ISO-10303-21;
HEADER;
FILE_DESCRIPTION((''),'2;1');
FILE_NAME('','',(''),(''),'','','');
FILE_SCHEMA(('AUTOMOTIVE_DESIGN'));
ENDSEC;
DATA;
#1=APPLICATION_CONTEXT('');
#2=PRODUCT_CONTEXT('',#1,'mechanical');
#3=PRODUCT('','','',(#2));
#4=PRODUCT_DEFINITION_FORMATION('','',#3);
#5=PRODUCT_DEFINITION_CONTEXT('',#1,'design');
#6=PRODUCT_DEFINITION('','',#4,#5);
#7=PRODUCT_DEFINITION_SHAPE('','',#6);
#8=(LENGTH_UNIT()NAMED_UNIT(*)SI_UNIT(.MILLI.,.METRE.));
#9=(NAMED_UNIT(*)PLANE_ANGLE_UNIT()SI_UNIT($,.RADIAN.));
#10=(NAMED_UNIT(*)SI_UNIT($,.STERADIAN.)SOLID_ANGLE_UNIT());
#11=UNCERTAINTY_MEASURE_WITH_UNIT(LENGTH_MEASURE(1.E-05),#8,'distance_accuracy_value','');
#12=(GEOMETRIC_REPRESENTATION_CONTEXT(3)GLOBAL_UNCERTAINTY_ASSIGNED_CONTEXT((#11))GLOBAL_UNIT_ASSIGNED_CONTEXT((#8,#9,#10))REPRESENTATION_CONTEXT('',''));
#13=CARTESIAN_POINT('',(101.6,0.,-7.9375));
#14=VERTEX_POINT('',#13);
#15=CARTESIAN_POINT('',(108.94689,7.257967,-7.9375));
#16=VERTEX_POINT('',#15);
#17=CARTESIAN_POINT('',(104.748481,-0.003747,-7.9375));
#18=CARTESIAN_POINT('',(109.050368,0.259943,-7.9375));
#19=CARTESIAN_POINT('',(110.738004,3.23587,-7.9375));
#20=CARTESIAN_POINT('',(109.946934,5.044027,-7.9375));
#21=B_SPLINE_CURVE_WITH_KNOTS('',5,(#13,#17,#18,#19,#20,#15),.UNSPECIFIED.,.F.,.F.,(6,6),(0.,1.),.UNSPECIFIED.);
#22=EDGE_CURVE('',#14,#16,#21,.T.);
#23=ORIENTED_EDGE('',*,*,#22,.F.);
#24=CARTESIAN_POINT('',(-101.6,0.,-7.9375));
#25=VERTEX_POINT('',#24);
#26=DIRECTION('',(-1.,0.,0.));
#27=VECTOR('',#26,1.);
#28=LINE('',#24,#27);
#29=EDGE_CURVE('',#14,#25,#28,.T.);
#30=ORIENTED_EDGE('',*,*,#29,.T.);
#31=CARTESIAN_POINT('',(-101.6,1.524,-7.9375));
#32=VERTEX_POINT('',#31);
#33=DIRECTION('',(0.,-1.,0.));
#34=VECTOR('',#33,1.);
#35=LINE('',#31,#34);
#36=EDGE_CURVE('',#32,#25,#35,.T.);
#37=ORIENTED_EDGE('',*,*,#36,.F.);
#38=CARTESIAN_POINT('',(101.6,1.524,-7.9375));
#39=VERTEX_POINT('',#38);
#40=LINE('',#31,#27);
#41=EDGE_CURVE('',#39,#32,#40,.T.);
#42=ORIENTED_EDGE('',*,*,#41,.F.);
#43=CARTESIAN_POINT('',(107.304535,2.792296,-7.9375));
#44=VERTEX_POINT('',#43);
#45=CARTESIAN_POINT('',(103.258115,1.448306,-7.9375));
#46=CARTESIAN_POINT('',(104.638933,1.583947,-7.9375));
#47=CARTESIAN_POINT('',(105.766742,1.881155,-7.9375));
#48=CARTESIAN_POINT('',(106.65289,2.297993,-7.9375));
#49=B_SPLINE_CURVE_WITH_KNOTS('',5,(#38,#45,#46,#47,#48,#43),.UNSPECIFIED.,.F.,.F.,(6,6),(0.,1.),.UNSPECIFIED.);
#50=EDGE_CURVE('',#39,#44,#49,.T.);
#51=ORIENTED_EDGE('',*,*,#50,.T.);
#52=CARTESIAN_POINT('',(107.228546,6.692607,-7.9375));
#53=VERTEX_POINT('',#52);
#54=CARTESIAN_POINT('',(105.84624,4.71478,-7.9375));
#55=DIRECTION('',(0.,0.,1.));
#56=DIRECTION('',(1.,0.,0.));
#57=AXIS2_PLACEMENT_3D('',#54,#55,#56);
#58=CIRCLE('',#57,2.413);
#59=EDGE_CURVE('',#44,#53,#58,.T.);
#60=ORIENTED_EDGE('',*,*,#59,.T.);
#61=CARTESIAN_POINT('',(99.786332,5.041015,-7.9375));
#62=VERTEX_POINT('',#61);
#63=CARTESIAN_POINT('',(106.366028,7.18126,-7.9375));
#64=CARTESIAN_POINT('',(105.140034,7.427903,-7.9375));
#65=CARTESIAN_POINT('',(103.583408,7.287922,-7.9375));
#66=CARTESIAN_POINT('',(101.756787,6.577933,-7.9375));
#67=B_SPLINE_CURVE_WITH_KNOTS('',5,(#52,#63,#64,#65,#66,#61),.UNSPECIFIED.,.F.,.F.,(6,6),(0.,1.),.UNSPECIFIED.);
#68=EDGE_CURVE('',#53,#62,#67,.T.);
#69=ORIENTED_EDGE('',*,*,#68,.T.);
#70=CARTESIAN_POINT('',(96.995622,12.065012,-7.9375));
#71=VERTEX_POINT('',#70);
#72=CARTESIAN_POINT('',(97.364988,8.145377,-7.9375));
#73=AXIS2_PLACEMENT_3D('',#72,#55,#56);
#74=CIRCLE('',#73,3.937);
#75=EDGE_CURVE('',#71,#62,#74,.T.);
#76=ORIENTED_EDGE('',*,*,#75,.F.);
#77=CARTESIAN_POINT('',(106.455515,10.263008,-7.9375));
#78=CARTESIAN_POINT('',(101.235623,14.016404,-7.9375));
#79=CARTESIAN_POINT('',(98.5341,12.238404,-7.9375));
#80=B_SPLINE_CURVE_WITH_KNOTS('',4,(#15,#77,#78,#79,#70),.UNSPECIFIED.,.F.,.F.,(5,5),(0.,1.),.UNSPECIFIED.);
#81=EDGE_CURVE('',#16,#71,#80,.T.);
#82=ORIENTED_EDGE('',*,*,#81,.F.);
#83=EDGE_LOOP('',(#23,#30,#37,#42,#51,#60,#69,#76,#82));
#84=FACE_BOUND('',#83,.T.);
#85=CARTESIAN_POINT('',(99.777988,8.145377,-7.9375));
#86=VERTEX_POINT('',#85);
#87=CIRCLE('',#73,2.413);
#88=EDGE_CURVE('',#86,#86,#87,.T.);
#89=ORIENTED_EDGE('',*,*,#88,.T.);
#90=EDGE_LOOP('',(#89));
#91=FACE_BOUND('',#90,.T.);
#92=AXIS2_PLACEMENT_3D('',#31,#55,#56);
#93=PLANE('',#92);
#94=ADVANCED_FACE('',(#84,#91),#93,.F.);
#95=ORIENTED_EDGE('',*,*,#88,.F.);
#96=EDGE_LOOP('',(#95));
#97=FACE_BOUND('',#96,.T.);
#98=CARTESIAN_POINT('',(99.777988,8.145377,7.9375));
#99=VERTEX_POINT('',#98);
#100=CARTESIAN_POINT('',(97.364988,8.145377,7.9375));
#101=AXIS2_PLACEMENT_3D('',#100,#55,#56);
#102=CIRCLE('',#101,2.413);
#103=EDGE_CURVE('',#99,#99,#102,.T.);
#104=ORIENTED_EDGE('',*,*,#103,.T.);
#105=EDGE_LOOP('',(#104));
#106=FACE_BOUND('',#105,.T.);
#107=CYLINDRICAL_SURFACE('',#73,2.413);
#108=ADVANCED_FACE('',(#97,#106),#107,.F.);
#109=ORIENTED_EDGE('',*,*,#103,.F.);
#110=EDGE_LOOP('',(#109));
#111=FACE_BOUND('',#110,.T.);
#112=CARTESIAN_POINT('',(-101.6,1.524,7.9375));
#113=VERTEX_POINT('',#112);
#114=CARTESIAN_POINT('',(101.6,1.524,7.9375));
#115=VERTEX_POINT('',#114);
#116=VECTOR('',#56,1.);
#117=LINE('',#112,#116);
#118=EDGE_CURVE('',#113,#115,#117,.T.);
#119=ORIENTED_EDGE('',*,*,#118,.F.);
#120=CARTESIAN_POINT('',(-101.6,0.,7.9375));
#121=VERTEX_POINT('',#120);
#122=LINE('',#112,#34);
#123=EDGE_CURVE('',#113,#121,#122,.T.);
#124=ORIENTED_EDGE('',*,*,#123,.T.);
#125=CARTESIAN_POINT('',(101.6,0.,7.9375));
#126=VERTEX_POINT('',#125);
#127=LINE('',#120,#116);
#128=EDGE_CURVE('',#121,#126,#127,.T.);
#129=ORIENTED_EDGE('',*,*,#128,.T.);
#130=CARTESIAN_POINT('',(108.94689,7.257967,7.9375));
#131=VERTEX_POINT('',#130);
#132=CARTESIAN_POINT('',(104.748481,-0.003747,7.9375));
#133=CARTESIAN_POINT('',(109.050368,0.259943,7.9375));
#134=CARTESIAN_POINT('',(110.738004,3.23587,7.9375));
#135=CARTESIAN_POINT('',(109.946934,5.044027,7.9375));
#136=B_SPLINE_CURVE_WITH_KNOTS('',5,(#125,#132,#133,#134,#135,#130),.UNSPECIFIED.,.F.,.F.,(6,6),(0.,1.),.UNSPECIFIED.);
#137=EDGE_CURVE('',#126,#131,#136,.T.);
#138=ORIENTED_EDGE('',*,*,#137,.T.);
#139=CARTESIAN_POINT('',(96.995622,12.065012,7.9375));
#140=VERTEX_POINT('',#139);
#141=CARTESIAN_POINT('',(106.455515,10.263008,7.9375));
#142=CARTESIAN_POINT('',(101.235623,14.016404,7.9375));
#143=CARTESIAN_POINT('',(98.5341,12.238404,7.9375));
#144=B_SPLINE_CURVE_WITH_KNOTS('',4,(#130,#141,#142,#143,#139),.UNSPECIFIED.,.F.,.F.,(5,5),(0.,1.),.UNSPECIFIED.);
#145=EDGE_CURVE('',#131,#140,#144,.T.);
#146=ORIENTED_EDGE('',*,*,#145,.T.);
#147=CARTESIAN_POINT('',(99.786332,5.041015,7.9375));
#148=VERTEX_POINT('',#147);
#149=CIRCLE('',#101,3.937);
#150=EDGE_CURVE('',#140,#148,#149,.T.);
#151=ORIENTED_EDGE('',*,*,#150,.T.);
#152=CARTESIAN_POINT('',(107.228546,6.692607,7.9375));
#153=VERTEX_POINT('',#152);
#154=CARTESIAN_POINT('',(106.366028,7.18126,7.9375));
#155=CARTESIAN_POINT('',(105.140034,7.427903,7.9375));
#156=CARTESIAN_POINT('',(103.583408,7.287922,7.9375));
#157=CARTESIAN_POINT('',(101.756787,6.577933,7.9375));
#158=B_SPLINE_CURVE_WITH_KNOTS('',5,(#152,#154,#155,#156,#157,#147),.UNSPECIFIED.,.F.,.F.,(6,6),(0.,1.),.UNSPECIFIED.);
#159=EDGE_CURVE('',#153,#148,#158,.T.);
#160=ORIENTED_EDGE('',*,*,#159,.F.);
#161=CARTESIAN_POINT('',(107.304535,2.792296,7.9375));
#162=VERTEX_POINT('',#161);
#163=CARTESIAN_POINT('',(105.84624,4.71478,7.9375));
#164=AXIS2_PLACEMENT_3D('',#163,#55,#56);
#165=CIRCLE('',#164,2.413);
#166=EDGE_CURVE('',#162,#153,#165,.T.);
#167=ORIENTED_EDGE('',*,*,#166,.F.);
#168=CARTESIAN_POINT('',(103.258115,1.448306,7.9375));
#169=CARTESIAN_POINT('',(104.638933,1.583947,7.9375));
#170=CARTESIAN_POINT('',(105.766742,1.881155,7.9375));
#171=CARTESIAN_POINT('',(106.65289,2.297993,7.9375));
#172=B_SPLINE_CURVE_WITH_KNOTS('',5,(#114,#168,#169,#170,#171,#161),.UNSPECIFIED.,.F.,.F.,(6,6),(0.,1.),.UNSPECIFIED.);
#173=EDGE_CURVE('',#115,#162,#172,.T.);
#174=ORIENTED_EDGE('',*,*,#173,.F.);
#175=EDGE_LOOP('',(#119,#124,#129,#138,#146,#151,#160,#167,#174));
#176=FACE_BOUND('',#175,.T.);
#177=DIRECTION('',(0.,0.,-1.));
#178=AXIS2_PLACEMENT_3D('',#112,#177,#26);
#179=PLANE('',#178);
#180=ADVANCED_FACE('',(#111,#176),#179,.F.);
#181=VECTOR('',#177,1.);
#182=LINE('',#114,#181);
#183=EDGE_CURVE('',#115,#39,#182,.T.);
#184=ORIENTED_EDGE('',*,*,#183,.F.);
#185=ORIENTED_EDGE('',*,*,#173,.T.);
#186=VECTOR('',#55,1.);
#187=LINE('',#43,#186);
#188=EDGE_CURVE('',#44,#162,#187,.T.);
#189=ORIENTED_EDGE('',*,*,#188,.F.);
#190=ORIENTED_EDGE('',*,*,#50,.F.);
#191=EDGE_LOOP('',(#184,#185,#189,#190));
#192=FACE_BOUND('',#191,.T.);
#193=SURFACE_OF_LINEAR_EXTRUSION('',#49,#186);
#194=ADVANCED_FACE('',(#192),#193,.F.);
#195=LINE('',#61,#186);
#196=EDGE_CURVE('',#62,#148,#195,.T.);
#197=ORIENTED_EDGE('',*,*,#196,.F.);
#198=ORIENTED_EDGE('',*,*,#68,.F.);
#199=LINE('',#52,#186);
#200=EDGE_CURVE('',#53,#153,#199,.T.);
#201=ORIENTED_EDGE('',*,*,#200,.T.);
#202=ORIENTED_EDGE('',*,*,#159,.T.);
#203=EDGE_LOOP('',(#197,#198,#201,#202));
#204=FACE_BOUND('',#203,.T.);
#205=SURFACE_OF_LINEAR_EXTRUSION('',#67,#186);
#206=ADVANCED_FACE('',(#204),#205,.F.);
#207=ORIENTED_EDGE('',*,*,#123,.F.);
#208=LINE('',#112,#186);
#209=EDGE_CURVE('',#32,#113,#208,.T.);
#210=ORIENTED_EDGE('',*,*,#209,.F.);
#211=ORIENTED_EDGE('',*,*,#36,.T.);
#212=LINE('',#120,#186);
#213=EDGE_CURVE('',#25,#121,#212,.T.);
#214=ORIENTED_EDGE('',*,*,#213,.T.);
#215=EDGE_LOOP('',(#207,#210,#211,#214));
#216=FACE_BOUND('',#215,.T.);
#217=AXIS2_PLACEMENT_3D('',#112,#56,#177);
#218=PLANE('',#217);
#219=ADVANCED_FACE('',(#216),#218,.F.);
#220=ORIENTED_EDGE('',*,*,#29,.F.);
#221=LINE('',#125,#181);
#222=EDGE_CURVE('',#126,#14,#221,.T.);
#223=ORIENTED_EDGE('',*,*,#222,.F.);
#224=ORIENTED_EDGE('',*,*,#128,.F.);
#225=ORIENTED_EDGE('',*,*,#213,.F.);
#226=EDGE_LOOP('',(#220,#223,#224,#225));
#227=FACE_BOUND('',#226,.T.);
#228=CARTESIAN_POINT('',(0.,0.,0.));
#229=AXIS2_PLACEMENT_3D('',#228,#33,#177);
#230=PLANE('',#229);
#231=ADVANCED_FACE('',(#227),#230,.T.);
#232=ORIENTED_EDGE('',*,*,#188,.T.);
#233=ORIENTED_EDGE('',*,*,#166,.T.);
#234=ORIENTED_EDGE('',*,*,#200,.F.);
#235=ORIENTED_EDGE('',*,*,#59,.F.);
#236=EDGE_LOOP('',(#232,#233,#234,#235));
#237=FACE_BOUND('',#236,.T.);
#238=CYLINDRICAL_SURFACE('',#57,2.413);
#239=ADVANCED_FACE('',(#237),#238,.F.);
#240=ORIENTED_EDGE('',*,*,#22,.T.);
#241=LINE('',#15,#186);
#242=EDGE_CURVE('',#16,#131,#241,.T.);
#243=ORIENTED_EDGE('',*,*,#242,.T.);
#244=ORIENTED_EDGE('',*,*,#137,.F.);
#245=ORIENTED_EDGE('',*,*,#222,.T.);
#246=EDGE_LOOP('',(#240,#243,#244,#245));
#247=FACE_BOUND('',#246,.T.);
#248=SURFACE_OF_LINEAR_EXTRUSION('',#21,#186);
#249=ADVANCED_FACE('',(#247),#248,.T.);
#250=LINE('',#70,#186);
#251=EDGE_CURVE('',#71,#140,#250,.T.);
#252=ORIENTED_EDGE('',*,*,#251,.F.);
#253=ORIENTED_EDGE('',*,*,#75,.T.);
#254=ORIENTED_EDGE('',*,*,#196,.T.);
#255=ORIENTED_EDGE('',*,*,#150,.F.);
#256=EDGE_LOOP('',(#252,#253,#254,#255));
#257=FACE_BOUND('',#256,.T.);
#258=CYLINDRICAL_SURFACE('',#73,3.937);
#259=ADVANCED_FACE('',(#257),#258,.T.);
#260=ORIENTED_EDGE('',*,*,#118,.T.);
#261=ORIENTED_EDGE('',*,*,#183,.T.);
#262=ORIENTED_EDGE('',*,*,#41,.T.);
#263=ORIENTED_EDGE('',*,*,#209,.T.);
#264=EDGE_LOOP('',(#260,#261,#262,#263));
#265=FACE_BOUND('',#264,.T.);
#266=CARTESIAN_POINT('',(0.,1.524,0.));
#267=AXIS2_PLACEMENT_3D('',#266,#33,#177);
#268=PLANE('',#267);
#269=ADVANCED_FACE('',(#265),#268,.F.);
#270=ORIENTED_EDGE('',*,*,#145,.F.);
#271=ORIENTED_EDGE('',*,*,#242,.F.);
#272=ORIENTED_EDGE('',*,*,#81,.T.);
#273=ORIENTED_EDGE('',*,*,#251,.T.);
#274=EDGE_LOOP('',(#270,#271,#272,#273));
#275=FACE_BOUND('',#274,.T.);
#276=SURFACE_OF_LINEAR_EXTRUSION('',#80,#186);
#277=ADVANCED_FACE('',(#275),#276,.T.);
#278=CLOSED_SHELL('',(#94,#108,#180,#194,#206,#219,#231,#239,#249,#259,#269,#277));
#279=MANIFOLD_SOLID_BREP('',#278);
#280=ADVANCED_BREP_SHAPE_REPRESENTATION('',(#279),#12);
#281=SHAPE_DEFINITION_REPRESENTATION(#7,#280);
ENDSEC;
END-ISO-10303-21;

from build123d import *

# Parameters (mm, degrees)
SKETCH1_W               = 203.2
SKETCH1_H               = 15.875
BOSS_EXTRUDE1_DEPTH     = 1.524
BOSS_EXTRUDE2_START     = -15.875
BOSS_EXTRUDE2_OUTLINE_R = 2.413
BOSS_EXTRUDE2_DEPTH     = 15.875


# Read off the part's stored shape, not the designer's step: Boss-Extrude2
with BuildPart() as part:
    # Sketch1 → Boss-Extrude1 (new body)
    with BuildSketch(Plane(origin=(0, 0, 0), x_dir=(1, 0, 0), z_dir=(0, 1, 0))):
        Rectangle(SKETCH1_W, SKETCH1_H)
    extrude(amount=BOSS_EXTRUDE1_DEPTH)

    # Boss-Extrude2 outline → Boss-Extrude2 (add)
    with BuildSketch(Plane.XY.offset(7.9375).offset(BOSS_EXTRUDE2_START)):
        with BuildLine():
            add(Edge.make_bspline(
                [(107.228546138, 6.692607406), (106.366027923, 7.18125968), (105.140033894, 7.42790314), (103.583408394, 7.287922485), (101.756786703, 6.577932625), (99.786331846, 5.041015057)],
                knots=[0, 0, 0, 0, 0, 0, 1, 1, 1, 1, 1, 1], degree=5))
            ThreePointArc((107.228546138, 6.692607406), (108.258782429, 4.761783473), (107.30453503, 2.792296286))
            add(Edge.make_bspline(
                [(101.6, 1.524), (103.258114517, 1.448306251), (104.638933259, 1.583946831), (105.766741539, 1.881154947), (106.652889556, 2.297992507), (107.30453503, 2.792296286)],
                knots=[0, 0, 0, 0, 0, 0, 1, 1, 1, 1, 1, 1], degree=5))
            Line((101.6, 1.524), (101.6, 0))
            add(Edge.make_bspline(
                [(101.6, 0), (104.748480566, -0.003746591), (109.050367624, 0.259943099), (110.73800353, 3.235869603), (109.946934459, 5.044027479), (108.94689031, 7.25796652)],
                knots=[0, 0, 0, 0, 0, 0, 1, 1, 1, 1, 1, 1], degree=5))
            add(Edge.make_bspline(
                [(108.94689031, 7.25796652), (106.455515071, 10.263008134), (101.235622898, 14.016404122), (98.534099755, 12.238404022), (96.99562172, 12.065011937)],
                knots=[0, 0, 0, 0, 0, 1, 1, 1, 1, 1], degree=4))
            ThreePointArc((96.99562172, 12.065011937), (93.706192437, 6.691697876), (99.786331846, 5.041015057))
        make_face()
        with Locations((97.364988112, 8.145377073)):
            Circle(BOSS_EXTRUDE2_OUTLINE_R, mode=Mode.SUBTRACT)
    extrude(amount=BOSS_EXTRUDE2_DEPTH)


solid = part.part
